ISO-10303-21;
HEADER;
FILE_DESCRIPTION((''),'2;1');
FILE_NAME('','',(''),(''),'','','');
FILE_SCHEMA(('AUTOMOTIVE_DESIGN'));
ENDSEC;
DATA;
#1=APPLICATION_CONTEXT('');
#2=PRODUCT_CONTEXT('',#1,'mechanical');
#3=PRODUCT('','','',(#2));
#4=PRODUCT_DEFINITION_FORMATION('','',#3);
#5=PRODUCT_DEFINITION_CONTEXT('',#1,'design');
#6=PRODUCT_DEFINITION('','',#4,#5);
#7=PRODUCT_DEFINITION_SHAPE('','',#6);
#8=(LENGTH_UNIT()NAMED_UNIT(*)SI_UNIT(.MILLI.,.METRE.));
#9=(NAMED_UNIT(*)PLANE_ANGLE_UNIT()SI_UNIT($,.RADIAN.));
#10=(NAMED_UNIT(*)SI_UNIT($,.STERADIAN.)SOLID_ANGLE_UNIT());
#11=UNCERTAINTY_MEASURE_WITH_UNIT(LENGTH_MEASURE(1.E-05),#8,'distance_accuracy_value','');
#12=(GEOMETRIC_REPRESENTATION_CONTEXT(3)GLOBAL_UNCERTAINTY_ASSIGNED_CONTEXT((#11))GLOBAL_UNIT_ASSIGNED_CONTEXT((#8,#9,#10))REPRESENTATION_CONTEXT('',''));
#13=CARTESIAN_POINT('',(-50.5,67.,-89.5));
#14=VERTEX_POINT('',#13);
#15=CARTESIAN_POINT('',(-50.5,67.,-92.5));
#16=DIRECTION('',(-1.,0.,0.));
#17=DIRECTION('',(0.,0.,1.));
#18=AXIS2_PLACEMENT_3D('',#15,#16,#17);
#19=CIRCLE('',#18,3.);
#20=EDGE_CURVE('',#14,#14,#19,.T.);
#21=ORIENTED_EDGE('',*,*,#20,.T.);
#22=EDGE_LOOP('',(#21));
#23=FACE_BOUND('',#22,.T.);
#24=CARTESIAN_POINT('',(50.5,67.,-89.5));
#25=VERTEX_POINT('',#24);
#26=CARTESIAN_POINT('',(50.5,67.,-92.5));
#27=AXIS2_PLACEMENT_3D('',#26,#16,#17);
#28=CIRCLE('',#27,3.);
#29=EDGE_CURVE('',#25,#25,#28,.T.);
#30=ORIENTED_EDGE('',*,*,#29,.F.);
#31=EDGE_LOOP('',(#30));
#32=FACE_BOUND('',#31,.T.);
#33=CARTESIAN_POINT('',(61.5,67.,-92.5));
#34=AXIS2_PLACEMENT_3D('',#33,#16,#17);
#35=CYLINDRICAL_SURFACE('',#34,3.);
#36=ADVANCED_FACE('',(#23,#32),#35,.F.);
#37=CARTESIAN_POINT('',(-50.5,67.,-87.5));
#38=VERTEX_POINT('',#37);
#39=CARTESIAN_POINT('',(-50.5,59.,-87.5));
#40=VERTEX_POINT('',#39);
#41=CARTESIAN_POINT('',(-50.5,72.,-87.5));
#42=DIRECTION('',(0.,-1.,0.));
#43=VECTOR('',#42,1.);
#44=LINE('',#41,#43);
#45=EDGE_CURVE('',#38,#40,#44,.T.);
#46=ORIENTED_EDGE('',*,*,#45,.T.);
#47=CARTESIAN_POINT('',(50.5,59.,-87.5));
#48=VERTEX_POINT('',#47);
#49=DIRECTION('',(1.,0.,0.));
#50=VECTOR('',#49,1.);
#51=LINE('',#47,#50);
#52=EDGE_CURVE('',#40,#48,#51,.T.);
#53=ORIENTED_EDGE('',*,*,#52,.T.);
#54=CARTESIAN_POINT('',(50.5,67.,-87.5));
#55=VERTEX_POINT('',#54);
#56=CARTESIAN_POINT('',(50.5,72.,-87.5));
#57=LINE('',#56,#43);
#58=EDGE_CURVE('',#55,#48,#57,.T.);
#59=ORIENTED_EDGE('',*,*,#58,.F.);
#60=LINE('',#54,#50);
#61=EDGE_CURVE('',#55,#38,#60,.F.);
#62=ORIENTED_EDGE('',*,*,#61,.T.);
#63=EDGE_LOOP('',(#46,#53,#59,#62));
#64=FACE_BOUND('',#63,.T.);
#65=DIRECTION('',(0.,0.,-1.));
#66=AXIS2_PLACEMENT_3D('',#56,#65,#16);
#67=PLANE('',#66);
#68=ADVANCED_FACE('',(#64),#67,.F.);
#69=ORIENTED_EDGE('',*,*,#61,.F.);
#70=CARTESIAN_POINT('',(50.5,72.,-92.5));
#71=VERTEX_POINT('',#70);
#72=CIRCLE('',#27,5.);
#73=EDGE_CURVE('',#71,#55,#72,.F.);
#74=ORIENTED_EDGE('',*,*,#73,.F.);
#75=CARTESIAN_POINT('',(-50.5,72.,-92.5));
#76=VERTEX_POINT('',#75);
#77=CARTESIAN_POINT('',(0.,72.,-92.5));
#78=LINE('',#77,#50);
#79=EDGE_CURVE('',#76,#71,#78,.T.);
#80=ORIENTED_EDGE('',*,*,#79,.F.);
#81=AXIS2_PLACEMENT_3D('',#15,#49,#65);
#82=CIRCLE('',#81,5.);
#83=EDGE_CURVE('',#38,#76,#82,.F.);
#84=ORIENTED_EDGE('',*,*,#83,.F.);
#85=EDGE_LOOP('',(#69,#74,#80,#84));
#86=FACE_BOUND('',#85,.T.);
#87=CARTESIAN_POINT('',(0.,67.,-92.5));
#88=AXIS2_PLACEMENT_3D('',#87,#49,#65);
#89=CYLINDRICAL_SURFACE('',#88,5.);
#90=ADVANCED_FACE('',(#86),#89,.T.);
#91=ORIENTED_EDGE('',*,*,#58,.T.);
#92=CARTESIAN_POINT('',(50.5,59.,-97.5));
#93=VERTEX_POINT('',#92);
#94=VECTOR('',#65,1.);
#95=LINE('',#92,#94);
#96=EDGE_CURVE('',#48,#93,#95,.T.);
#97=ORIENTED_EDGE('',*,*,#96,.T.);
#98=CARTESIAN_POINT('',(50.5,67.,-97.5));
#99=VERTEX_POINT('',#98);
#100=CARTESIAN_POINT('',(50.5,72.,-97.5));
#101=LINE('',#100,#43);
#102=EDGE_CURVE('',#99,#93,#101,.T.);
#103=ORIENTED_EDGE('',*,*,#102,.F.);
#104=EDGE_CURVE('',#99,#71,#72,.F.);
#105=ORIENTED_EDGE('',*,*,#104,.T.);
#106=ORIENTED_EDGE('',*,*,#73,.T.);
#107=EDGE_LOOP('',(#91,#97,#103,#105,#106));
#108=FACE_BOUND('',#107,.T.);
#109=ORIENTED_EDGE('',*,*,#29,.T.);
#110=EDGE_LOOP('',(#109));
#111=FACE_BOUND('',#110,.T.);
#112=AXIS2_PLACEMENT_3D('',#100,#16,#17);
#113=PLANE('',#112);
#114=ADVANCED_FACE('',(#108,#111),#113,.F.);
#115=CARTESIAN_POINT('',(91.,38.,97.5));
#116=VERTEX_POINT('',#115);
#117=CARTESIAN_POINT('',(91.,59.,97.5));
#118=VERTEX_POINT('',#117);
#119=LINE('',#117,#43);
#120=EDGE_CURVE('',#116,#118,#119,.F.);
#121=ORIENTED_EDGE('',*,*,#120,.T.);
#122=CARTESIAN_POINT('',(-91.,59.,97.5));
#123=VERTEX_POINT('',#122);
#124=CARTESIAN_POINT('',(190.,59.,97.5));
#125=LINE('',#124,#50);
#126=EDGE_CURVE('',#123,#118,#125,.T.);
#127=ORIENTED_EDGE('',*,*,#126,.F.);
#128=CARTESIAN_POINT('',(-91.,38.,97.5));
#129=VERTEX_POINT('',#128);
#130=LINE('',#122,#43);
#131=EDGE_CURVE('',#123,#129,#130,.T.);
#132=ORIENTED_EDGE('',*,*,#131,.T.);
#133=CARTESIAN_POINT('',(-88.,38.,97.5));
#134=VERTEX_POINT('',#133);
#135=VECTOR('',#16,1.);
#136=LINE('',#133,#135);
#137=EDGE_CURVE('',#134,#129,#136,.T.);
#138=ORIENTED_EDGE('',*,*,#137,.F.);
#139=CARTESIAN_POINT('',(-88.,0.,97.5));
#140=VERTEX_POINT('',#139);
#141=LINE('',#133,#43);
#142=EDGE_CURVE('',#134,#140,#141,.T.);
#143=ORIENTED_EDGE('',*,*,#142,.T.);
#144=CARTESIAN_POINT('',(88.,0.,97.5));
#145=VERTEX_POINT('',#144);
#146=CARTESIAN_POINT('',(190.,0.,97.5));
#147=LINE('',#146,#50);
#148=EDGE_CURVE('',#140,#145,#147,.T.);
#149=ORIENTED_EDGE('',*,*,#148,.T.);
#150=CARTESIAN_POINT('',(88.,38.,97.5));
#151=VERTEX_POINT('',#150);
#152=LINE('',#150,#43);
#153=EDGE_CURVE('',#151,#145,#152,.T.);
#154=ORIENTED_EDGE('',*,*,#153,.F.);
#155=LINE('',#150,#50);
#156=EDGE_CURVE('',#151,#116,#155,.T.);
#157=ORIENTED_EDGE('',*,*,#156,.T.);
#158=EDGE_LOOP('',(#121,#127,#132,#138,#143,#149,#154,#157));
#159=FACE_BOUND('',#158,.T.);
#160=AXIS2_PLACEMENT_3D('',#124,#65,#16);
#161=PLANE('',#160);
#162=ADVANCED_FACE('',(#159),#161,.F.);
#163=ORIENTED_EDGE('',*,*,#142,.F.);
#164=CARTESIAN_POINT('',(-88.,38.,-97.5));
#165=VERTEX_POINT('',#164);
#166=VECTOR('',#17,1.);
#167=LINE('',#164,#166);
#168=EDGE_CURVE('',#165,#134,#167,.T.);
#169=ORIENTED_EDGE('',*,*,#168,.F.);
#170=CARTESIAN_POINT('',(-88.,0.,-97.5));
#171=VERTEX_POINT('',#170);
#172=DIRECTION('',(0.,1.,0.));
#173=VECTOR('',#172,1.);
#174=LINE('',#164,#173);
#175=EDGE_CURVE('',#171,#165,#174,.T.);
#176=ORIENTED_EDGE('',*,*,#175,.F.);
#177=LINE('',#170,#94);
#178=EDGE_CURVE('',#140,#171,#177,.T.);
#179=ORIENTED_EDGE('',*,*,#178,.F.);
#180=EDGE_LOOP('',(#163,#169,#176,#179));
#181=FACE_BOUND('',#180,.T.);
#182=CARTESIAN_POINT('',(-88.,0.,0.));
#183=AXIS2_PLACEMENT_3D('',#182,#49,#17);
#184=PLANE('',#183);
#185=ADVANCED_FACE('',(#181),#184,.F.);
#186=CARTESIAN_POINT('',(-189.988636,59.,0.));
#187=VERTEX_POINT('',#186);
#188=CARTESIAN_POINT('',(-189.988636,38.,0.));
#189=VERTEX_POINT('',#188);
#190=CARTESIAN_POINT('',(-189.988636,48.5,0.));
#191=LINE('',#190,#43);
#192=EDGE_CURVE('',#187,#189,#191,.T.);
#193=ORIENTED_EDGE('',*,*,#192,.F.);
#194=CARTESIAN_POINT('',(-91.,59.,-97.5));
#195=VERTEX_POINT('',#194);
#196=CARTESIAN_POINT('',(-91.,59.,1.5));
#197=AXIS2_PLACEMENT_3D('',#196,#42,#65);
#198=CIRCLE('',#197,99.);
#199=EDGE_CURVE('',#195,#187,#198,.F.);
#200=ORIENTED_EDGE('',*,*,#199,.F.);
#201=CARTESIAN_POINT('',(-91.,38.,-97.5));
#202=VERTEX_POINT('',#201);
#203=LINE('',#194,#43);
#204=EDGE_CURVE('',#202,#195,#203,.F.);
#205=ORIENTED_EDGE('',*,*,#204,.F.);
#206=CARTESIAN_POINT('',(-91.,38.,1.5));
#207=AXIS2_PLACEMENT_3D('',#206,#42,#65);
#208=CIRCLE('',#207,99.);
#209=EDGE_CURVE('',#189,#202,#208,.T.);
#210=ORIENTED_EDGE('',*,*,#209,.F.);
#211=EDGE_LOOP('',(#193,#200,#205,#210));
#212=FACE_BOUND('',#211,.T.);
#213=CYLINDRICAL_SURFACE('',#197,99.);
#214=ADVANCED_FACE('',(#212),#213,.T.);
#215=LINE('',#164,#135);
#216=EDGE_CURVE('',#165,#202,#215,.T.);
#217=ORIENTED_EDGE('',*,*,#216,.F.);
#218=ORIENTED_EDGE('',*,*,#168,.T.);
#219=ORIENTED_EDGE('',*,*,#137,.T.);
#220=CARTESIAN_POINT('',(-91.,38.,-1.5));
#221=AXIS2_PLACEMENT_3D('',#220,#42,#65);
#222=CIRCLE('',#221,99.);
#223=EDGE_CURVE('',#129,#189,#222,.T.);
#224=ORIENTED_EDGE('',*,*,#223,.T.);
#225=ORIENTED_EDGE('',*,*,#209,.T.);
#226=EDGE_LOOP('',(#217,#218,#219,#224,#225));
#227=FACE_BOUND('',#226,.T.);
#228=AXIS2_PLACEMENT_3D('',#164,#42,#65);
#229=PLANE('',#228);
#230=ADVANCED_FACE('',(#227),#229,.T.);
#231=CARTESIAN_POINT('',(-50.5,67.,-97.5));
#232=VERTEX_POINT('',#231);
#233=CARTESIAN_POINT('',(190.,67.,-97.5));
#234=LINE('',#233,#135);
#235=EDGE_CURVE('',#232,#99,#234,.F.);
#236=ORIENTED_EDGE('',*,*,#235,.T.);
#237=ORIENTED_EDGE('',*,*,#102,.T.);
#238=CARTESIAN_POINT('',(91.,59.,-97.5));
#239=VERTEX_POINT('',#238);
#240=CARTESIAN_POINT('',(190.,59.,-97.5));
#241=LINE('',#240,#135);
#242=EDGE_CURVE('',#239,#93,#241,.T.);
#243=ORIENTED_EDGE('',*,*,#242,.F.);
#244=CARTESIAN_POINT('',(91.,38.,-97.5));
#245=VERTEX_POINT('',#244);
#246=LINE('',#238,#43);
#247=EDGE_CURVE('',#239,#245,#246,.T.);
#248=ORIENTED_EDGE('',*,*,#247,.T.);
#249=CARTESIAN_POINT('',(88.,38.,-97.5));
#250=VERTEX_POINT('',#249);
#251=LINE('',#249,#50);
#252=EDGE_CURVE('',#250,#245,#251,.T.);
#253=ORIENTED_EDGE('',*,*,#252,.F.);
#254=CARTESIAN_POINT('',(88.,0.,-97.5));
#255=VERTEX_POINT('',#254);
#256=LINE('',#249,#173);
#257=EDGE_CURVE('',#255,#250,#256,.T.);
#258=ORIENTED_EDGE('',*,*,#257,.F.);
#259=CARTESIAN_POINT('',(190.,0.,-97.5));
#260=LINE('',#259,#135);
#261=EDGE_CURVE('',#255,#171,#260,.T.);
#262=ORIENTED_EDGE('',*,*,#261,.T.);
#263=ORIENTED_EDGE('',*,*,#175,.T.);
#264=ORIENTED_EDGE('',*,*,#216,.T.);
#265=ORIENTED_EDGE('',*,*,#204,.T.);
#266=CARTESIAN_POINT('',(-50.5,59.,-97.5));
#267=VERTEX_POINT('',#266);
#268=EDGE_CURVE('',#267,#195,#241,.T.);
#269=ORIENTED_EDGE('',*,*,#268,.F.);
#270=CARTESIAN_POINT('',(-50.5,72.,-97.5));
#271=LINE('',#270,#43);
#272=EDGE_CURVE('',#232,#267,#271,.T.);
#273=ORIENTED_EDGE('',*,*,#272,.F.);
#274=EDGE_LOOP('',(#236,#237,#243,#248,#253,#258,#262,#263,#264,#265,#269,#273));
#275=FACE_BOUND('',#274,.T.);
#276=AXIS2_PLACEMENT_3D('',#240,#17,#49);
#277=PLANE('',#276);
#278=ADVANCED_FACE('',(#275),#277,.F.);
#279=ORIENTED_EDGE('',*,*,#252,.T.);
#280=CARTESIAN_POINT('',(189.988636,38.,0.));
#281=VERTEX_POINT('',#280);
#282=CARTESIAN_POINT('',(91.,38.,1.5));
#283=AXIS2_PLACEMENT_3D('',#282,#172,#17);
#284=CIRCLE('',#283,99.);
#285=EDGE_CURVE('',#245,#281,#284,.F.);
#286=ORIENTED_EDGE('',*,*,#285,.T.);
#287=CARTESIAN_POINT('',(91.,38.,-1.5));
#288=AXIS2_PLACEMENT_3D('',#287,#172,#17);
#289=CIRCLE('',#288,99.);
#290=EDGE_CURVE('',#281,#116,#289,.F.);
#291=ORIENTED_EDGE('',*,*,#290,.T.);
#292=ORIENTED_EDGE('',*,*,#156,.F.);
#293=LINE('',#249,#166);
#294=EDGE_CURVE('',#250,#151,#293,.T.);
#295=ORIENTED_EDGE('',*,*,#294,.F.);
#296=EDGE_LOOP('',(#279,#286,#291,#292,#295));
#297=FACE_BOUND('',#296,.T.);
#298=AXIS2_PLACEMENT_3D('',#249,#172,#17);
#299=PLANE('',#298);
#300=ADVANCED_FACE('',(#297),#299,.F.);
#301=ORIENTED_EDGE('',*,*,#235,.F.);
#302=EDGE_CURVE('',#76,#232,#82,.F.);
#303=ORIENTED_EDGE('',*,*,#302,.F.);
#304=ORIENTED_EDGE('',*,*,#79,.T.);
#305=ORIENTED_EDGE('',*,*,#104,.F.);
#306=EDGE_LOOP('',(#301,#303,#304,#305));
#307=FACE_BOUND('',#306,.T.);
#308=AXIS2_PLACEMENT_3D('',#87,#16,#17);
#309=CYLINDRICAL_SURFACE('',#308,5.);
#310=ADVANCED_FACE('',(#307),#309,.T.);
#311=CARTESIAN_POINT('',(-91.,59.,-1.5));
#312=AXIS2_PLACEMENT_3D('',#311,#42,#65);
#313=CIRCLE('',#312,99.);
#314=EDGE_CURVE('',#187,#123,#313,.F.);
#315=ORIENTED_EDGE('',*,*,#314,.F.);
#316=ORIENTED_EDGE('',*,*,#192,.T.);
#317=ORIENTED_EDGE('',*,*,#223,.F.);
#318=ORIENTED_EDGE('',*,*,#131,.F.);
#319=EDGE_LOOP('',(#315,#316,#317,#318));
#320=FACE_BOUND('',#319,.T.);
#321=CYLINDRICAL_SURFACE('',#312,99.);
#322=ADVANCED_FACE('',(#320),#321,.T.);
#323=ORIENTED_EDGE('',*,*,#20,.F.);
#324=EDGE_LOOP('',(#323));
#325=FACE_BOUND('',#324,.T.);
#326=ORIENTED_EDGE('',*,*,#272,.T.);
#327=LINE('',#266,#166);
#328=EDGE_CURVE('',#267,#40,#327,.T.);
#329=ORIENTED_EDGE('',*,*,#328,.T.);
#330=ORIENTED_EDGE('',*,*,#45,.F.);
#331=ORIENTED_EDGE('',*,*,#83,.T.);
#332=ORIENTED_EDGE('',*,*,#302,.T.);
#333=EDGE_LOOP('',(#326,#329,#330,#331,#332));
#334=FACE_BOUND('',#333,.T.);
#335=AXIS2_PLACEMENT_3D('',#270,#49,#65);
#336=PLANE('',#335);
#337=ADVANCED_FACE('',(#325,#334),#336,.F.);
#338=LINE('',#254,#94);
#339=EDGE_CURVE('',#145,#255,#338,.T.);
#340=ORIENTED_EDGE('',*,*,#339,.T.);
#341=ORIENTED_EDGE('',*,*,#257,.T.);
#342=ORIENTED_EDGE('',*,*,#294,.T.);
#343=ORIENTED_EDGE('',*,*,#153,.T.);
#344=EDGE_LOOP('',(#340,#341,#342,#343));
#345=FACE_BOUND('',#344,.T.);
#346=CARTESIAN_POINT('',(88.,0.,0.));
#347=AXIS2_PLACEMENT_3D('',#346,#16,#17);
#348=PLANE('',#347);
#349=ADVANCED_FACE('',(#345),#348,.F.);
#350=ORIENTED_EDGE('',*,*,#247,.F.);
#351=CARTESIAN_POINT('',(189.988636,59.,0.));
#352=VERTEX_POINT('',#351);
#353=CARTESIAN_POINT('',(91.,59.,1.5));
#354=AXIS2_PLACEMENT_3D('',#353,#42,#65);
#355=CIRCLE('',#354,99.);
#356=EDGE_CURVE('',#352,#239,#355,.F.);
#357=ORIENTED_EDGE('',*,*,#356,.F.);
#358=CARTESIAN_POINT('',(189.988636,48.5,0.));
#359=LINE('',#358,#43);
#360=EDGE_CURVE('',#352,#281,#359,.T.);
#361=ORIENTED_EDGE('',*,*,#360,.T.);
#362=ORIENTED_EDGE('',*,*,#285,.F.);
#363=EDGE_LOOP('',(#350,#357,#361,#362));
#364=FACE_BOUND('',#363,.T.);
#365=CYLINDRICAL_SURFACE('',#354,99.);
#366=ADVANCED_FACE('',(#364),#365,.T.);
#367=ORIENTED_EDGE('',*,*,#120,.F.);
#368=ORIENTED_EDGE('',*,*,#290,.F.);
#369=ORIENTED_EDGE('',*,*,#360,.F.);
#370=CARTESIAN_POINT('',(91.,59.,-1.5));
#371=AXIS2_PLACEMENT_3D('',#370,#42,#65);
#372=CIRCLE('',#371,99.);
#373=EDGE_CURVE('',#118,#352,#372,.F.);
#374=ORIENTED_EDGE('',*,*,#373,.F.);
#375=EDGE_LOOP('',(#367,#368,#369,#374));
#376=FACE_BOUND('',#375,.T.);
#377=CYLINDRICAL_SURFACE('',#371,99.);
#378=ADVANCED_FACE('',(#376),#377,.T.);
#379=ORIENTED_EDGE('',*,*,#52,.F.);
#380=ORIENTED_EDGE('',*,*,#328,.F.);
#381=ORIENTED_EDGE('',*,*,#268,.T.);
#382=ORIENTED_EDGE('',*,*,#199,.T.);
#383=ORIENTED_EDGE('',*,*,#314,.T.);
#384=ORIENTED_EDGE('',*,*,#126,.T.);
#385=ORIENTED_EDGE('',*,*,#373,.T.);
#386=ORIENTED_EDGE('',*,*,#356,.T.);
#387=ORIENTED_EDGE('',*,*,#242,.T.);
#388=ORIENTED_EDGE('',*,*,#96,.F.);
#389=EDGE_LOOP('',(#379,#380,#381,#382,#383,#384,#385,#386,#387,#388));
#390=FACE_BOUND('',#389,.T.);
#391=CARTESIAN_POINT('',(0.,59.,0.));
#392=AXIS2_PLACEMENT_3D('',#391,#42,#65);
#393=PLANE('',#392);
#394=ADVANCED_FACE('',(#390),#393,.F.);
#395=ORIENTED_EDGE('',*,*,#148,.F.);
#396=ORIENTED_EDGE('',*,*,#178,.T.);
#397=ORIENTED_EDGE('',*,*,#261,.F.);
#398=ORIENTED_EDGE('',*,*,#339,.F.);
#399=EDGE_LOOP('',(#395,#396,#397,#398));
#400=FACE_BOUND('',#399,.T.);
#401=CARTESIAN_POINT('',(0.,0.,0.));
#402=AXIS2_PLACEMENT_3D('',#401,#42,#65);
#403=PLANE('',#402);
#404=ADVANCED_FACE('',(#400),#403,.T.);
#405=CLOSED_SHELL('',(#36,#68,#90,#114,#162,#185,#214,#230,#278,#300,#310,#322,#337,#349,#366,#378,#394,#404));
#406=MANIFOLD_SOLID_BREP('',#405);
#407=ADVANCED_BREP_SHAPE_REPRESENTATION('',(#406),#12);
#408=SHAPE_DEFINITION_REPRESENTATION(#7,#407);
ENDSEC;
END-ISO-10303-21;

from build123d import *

# Parameters (mm, degrees)
SKETCH1_W           = 380
SKETCH1_H           = 195
BOSS_EXTRUDE1_DEPTH = 59
SKETCH2_W           = 195
SKETCH2_H           = 38
CUT_EXTRUDE1_DEPTH  = 102
FILLET1_R           = 99
SKETCH3_W           = 101
SKETCH3_H           = 10
BOSS_EXTRUDE2_DEPTH = 13
FILLET2_R           = 5
SKETCH4_R           = 3
CUT_EXTRUDE2_DEPTH  = 112


# Some blends are built 0.0001 mm under size
with BuildPart() as part:
    # Sketch1 → Boss-Extrude1 (new body)
    with BuildSketch(Plane(origin=(0, 0, 0), x_dir=(1, 0, 0), z_dir=(0, 1, 0))):
        Rectangle(SKETCH1_W, SKETCH1_H)
    extrude(amount=BOSS_EXTRUDE1_DEPTH)

    # Sketch2 → Cut-Extrude1 (cut)
    with BuildSketch(Plane(origin=(190, 0, 0), x_dir=(0, 0, -1), z_dir=(1, 0, 0))):
        with Locations((0, 19)):
            Rectangle(SKETCH2_W, SKETCH2_H)
    cut_extrude1 = extrude(amount=-CUT_EXTRUDE1_DEPTH, mode=Mode.SUBTRACT)

    # Mirror1: Cut-Extrude1 across plane
    add(cut_extrude1.mirror(Plane(origin=(0, 0, 0), x_dir=(0, 0, 1), z_dir=(1, 0, 0))), mode=Mode.SUBTRACT)

    # Fillet1
    # the kernel refuses this fillet: 99 mm, written as the material it takes off along each edge
    with BuildSketch(Plane(origin=(-190, -209.5, 97.5), x_dir=(0, 0, -1), z_dir=(0, 1, 0)), Plane(origin=(-190, -209.5, -97.5), x_dir=(1, 0, 0), z_dir=(0, 1, 0))) as fillet1_piece_1:
        with BuildLine():
            CenterArc((FILLET1_R, -FILLET1_R), FILLET1_R, 90, 90)
            Line((0, -FILLET1_R), (0, 0))
            Line((0, 0), (FILLET1_R, 0))
        make_face()
    extrude(amount=516, mode=Mode.SUBTRACT)
    with BuildSketch(Plane(origin=(190, -209.5, -97.5), x_dir=(-1, 0, 0), z_dir=(0, 1, 0)), Plane(origin=(190, -209.5, 97.5), x_dir=(0, 0, -1), z_dir=(0, 1, 0))) as fillet1_piece_2:
        with BuildLine():
            CenterArc((FILLET1_R, FILLET1_R), FILLET1_R, 180, 90)
            Line((0, FILLET1_R), (0, 0))
            Line((0, 0), (FILLET1_R, 0))
        make_face()
    extrude(amount=516, mode=Mode.SUBTRACT)

    # Sketch3 → Boss-Extrude2 (add)
    with BuildSketch(Plane(origin=(0, 59, 0), x_dir=(1, 0, 0), z_dir=(0, 1, 0))):
        with Locations((0, 92.5)):
            Rectangle(SKETCH3_W, SKETCH3_H)
    extrude(amount=BOSS_EXTRUDE2_DEPTH)

    # Fillet2
    fillet2_edges = [part.edges().sort_by_distance(p)[0] for p in [
        (0, 72, -97.5),
        (0, 72, -87.5),
    ]]
    fillet(fillet2_edges, radius=FILLET2_R - 0.0001)  # a hair under: the kernel refuses the full size

    # Sketch4 → Cut-Extrude2 (cut)
    with BuildSketch(Plane.ZY.offset(50.5)):
        with Locations((-92.5, 67)):
            Circle(SKETCH4_R)
    extrude(amount=-CUT_EXTRUDE2_DEPTH, mode=Mode.SUBTRACT)


solid = part.part
